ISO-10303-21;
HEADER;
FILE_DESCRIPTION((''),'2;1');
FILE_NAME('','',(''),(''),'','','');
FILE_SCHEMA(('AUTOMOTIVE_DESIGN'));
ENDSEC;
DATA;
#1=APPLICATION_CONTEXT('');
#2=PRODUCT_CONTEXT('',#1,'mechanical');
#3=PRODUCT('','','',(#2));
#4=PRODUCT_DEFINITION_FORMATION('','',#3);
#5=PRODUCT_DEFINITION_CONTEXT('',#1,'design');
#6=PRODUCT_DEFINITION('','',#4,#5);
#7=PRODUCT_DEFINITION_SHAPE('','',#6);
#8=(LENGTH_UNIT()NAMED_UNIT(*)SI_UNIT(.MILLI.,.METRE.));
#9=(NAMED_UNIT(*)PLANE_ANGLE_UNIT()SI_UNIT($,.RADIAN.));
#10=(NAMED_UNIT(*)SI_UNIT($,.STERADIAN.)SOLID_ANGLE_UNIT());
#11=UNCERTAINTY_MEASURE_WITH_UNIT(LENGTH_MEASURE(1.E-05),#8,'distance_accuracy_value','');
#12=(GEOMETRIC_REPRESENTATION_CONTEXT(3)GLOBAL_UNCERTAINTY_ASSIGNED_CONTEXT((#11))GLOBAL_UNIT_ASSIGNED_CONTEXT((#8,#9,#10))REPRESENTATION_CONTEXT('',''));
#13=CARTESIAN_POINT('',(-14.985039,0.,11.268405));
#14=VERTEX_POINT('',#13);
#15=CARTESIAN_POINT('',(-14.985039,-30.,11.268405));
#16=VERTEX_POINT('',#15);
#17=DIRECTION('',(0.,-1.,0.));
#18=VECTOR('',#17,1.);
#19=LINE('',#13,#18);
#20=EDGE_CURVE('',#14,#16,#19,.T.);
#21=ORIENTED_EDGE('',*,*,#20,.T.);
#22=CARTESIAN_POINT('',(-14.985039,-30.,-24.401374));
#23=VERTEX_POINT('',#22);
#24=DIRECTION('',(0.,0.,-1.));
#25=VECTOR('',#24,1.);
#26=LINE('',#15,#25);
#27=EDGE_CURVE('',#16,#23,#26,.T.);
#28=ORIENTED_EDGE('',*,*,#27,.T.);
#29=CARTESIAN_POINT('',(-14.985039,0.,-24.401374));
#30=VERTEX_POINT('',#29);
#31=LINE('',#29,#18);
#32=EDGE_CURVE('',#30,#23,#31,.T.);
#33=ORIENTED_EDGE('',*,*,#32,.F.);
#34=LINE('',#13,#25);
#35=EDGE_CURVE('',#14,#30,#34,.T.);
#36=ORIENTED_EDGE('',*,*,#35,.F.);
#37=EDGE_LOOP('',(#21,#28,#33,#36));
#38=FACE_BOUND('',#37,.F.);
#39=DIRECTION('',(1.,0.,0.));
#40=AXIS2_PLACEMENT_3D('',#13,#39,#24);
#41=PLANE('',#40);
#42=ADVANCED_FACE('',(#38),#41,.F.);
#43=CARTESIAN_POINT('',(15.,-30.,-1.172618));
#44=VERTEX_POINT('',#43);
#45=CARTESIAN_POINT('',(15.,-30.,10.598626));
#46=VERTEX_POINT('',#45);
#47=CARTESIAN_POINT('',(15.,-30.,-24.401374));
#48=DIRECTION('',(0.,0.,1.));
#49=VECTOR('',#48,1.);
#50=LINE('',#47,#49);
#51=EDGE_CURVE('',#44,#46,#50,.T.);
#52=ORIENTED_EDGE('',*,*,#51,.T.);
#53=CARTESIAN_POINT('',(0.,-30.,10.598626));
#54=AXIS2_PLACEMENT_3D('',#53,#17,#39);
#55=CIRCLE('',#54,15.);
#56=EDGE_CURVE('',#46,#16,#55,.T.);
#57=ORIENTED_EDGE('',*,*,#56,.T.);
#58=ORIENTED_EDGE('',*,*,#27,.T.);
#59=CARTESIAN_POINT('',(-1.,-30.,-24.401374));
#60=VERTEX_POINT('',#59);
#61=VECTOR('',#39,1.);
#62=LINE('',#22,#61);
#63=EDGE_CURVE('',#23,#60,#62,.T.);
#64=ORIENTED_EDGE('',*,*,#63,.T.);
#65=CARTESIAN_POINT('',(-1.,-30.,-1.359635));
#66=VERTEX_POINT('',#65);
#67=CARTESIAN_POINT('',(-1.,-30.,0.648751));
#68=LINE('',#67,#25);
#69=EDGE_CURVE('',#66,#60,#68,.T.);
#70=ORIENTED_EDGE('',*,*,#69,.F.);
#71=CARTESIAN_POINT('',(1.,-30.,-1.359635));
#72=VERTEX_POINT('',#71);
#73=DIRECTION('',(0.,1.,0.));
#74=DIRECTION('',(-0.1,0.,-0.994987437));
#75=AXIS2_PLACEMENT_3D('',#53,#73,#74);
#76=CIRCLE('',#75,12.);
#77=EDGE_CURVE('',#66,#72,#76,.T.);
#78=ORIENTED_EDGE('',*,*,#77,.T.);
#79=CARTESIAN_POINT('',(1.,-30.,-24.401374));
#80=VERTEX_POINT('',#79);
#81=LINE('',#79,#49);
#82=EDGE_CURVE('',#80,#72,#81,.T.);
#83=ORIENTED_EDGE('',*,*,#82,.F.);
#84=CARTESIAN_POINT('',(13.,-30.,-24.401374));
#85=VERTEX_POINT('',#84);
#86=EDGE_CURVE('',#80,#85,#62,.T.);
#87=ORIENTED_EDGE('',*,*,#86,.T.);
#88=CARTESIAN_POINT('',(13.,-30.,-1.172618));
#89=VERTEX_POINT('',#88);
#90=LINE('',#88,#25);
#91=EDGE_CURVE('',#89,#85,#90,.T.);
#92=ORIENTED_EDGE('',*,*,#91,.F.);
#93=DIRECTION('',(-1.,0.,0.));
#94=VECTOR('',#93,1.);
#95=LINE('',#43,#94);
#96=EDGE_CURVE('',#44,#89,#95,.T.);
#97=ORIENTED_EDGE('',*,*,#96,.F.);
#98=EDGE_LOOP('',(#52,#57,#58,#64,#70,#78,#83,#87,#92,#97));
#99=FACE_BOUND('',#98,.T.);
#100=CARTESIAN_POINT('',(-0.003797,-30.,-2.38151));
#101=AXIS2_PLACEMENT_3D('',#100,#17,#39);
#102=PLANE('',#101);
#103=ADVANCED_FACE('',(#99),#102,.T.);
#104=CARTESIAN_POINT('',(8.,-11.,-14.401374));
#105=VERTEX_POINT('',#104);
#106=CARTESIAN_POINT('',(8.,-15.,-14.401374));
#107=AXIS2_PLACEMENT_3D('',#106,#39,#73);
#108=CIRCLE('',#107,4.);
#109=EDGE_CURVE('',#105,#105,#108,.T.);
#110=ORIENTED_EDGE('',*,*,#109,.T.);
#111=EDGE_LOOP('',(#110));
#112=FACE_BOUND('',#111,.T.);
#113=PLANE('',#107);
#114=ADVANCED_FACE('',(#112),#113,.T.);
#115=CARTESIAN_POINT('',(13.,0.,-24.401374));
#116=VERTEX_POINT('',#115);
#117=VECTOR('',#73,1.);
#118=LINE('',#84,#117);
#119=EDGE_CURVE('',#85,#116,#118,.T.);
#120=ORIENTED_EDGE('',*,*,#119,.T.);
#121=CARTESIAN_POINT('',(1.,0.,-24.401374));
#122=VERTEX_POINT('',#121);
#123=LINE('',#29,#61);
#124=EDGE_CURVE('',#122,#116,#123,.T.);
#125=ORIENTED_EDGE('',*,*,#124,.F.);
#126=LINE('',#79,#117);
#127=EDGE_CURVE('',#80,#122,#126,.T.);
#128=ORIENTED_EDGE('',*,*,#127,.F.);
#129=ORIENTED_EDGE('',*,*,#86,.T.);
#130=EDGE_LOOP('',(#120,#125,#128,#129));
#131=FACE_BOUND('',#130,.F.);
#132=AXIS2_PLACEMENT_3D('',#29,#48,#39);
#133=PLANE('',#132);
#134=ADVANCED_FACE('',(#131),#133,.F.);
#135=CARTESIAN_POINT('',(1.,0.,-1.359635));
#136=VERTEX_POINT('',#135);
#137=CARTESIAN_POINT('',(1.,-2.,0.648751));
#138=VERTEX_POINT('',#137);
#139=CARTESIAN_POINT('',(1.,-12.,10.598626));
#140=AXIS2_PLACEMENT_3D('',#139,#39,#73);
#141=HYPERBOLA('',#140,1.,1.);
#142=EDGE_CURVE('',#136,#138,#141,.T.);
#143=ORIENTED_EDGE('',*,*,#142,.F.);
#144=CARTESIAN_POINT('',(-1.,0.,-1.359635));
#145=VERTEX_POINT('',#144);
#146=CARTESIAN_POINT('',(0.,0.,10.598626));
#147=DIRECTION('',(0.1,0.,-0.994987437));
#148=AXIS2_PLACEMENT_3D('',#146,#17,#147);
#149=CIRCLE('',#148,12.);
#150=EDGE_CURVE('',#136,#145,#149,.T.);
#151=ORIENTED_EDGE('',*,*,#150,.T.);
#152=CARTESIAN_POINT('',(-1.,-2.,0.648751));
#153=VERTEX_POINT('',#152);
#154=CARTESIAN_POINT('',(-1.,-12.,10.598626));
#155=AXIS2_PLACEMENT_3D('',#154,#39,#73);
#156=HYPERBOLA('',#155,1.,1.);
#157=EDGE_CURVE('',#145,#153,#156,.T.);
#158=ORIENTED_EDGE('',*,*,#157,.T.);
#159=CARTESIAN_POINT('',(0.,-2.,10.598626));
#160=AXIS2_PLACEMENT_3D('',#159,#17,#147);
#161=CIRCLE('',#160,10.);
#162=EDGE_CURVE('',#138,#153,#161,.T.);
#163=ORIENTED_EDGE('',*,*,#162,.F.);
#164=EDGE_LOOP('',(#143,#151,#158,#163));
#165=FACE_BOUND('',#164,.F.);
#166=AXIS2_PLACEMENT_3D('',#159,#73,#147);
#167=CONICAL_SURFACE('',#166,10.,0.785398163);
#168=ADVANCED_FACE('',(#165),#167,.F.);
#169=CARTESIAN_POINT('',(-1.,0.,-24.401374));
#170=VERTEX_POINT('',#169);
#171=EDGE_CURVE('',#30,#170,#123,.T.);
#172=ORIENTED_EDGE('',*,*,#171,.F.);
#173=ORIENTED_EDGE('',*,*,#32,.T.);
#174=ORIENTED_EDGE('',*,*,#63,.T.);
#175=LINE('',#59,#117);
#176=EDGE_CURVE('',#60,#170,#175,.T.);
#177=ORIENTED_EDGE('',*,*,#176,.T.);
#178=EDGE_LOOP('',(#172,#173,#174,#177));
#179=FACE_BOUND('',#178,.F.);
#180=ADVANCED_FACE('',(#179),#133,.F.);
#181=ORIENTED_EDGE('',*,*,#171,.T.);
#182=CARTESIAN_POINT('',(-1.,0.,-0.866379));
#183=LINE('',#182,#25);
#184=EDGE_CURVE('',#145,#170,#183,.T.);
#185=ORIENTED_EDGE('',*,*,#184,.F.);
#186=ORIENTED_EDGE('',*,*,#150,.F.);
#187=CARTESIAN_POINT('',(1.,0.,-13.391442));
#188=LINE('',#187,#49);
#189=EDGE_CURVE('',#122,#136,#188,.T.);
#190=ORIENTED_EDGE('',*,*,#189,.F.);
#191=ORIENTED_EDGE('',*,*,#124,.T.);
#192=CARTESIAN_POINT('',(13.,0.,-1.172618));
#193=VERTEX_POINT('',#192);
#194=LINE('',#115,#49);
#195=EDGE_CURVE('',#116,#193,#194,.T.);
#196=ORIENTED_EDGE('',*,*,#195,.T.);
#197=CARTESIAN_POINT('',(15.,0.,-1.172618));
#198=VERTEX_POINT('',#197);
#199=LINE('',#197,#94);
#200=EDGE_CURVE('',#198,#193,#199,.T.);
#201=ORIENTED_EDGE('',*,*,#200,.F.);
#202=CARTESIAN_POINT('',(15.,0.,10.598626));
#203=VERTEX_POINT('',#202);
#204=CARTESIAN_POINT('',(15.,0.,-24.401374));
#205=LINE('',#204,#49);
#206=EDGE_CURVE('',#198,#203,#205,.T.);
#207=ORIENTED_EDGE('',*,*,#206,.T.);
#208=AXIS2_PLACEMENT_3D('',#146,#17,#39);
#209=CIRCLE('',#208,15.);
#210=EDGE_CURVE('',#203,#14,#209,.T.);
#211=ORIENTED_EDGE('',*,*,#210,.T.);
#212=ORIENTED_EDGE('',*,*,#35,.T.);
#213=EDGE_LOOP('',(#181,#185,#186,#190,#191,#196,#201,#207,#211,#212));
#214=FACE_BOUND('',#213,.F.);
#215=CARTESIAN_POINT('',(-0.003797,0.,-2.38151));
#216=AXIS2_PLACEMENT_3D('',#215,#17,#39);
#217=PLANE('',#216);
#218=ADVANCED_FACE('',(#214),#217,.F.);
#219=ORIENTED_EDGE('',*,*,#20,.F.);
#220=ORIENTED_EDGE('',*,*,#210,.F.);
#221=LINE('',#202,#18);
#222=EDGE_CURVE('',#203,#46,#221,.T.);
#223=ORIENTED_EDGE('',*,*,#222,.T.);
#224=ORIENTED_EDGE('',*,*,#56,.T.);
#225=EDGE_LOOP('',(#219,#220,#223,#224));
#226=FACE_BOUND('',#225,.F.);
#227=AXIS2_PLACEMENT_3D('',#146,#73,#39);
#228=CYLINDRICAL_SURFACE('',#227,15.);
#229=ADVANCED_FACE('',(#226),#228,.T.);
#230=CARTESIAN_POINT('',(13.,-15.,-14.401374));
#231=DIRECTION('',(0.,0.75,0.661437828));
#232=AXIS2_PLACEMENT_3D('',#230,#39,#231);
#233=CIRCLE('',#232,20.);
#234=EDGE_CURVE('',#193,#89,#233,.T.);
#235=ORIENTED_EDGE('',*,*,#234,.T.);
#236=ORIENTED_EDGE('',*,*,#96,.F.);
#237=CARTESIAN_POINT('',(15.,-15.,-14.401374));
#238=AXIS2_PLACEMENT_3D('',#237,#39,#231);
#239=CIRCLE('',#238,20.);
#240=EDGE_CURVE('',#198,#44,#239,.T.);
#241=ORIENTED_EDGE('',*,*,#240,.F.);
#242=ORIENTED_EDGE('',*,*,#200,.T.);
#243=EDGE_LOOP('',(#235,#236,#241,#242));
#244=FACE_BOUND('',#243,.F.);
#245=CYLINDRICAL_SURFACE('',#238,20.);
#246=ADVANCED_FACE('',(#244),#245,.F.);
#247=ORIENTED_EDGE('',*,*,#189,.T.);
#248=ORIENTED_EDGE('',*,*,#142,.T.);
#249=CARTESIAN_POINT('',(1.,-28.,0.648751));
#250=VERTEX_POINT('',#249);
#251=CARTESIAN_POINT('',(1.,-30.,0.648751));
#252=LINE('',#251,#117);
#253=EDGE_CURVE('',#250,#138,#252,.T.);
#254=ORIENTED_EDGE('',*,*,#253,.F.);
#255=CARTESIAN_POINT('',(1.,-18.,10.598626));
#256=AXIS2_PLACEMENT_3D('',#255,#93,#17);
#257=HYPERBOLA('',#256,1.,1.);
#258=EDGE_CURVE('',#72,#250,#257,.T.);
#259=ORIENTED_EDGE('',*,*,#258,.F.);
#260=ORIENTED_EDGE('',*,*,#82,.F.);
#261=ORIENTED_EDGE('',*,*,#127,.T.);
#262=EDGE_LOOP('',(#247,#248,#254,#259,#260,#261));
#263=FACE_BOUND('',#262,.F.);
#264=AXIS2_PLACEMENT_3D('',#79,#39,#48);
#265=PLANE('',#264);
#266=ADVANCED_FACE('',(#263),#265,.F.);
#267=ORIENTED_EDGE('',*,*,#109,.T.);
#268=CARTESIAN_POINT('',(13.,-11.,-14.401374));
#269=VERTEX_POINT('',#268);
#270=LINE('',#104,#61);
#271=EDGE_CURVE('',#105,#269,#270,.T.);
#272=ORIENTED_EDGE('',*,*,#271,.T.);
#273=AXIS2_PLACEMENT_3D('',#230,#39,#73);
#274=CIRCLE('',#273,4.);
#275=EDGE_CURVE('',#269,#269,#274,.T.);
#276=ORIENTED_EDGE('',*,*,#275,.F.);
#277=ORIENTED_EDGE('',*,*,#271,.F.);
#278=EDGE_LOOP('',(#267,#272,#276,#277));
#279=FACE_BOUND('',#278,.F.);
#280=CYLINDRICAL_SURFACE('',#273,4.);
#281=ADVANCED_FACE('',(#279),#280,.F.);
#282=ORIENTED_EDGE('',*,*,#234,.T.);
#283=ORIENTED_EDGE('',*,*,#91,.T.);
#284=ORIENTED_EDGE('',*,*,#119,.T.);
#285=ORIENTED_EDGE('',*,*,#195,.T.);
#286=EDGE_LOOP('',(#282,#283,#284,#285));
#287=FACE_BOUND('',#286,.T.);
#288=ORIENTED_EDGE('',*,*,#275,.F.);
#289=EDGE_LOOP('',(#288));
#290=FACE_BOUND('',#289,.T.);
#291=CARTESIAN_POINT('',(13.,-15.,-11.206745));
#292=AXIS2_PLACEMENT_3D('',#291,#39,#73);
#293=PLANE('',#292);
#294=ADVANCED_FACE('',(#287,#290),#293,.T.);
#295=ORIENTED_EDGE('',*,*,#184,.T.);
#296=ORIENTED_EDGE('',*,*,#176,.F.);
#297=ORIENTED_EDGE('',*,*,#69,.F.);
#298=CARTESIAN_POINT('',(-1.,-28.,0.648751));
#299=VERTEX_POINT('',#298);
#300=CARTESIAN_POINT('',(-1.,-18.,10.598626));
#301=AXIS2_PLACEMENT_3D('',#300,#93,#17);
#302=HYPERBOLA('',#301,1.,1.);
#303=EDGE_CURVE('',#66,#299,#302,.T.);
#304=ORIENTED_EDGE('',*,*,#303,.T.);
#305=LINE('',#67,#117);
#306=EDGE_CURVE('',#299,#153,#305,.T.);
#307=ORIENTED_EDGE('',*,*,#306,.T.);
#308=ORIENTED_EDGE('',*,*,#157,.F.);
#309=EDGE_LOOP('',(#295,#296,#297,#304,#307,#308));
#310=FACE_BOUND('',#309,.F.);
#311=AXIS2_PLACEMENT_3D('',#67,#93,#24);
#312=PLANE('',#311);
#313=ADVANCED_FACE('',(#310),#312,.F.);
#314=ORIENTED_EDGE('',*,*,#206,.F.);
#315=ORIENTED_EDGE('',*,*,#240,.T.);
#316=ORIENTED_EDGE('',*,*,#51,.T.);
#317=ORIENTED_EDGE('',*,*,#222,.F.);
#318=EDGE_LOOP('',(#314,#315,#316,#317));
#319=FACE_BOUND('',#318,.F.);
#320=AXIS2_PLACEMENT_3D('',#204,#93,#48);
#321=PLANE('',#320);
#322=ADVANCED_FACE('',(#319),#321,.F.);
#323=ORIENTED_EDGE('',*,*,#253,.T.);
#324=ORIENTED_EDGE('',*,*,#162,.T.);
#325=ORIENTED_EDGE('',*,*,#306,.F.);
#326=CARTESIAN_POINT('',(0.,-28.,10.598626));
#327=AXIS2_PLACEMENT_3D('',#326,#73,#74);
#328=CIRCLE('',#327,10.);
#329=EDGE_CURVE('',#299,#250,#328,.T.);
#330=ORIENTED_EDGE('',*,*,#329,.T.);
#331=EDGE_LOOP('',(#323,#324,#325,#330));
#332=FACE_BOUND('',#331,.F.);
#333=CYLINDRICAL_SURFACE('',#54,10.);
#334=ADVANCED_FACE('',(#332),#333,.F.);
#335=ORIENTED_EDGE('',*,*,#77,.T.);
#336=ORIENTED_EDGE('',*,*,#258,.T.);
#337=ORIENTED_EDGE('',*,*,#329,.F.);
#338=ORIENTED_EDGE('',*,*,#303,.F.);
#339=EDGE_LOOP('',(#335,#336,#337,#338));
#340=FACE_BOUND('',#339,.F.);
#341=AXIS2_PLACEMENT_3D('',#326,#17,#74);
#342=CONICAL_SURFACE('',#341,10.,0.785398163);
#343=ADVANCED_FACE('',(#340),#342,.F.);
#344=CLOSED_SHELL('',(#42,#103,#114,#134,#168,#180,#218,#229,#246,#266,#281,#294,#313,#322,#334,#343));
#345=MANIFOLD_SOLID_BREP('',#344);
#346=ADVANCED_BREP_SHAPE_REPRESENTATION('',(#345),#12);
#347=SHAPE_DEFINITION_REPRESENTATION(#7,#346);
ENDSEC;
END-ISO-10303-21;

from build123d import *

# Parameters (mm, degrees)
F1_DEPTH  = 30
F2_R      = 10
F3_DEPTH  = 30.001
F5_DEPTH  = 30.001
F7_DEPTH  = 2
F8_R      = 4
F9_DEPTH  = 5
F10_SIZE2 = 2
F10_SIZE  = 2


with BuildPart() as f1:
    # F0 (on Front) → F1 (new body)
    with BuildSketch(Plane.XZ):
        with BuildLine():
            Line((-14.9850390488, 11.2684052181), (-14.9850390488, -24.4013743764))
            Line((-14.9850390488, -24.4013743764), (-0.9850390488, -24.4013743764))
            Line((-0.9850390488, -24.4013743764), (1, -24.4013743764))
            Line((1, -24.4013743764), (15, -24.4013743764))
            Line((15, -24.4013743764), (15, 10.5986256236))
            ThreePointArc((15, 10.5986256236), (0.334973333, 25.5948849194), (-14.9850390488, 11.2684052181))
        make_face()
    extrude(amount=F1_DEPTH)

    # F2 (on face) → F3 (cut, through all)
    with BuildSketch(Plane.XZ.offset(30)):
        with Locations((0, 10.5986256236)):
            Circle(F2_R)
    extrude(amount=-F3_DEPTH, mode=Mode.SUBTRACT)

    # F4 (on face) → F5 (cut, through all)
    with BuildSketch(Plane.XZ.offset(30)):
        with BuildLine():
            Line((-1, -24.4013743764), (0, -24.4013743764))
            Line((0, -24.4013743764), (1, -24.4013743764))
            Line((1, -24.4013743764), (1, 0.6487512526))
            ThreePointArc((1, 0.6487512526), (0, 0.5986256236), (-1, 0.6487512526))
            Line((-1, 0.6487512526), (-1, -24.4013743764))
        make_face()
    extrude(amount=-F5_DEPTH, mode=Mode.SUBTRACT)

    # F6 (on face) → F7 (cut)
    with BuildSketch(Plane.YZ.offset(15)):
        with BuildLine():
            Line((0, -24.4013743764), (0, -1.172617821))
            ThreePointArc((0, -1.172617821), (-15, 5.5986256236), (-30, -1.172617821))
            Line((-30, -1.172617821), (-30, -24.4013743764))
            Line((-30, -24.4013743764), (0, -24.4013743764))
        make_face()
    extrude(amount=-F7_DEPTH, mode=Mode.SUBTRACT)

    # F8 (on face) → F9 (cut, symmetric)
    with BuildSketch(Plane.YZ.offset(13)):
        with Locations((-15, -14.4013743764)):
            Circle(F8_R)
    extrude(amount=F9_DEPTH, both=True, mode=Mode.SUBTRACT)

    # F10
    f10_edges = [f1.edges().sort_by_distance(p)[0] for p in [
        (0, -30, 20.598626),
        (0, 0, 20.598626),
    ]]
    chamfer(f10_edges, length=F10_SIZE, length2=F10_SIZE2)


solid = f1.part
